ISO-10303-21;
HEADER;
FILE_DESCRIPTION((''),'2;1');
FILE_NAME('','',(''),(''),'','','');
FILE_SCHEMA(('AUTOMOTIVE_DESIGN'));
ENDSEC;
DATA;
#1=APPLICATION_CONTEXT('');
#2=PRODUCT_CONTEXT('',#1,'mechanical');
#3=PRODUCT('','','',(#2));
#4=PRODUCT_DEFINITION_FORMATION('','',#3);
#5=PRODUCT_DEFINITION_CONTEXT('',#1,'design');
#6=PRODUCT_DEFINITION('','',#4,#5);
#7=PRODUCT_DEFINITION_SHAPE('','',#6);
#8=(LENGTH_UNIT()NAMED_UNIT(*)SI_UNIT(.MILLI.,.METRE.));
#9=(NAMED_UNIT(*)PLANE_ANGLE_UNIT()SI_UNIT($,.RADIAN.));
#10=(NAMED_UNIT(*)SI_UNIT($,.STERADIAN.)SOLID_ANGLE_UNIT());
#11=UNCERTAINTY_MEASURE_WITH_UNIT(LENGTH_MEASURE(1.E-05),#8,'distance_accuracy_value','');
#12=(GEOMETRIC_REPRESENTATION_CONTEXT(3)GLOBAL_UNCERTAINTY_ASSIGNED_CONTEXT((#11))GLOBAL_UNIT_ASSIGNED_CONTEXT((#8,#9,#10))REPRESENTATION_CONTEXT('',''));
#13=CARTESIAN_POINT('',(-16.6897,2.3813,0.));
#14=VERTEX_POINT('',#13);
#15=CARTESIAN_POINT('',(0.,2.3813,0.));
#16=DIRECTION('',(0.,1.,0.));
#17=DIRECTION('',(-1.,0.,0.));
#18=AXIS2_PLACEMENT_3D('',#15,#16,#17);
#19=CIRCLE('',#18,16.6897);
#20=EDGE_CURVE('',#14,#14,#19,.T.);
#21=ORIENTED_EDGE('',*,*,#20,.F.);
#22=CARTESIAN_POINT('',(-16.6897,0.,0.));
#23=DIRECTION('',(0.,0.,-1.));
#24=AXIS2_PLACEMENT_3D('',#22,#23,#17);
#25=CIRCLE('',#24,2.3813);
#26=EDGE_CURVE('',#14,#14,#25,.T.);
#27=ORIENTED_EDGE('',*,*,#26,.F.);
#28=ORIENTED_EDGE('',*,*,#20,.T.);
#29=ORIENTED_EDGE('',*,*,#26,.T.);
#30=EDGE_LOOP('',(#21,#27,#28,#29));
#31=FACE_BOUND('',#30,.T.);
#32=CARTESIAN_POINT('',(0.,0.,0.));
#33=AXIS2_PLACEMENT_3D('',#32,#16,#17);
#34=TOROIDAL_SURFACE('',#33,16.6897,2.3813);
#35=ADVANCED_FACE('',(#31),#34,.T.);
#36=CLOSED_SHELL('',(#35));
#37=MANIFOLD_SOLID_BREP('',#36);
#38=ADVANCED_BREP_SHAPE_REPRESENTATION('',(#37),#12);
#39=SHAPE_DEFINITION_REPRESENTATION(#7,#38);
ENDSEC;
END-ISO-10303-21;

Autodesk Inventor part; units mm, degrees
ref_plane "YZ Plane" through (0, 0, 0) normal (1, 0, 0) x (0, 1, 0)
ref_plane "XZ Plane" through (0, 0, 0) normal (0, 1, 0) x (-1, 0, 0)
ref_plane "XY Plane" through (0, 0, 0) normal (0, 0, 1) x (1, 0, 0)
sketch "Sketch3" plane through (0, 0, 0) normal (0, 1, 0) x (-1, 0, 0)
  circle A0 centre (0, 0) radius 19.05
  dimension "d7" = 38.1
sketch "Sketch4" plane through (0, 0, 0) normal (1, 0, 0) x (0, 1, 0)
  circle A0 centre (0, -16.6897) radius 2.3813
  point P0 (0, 0)
sweep "Sweep2" add profiles "Sketch4" path "Sketch3"
properties part number "Piston O Ring"
